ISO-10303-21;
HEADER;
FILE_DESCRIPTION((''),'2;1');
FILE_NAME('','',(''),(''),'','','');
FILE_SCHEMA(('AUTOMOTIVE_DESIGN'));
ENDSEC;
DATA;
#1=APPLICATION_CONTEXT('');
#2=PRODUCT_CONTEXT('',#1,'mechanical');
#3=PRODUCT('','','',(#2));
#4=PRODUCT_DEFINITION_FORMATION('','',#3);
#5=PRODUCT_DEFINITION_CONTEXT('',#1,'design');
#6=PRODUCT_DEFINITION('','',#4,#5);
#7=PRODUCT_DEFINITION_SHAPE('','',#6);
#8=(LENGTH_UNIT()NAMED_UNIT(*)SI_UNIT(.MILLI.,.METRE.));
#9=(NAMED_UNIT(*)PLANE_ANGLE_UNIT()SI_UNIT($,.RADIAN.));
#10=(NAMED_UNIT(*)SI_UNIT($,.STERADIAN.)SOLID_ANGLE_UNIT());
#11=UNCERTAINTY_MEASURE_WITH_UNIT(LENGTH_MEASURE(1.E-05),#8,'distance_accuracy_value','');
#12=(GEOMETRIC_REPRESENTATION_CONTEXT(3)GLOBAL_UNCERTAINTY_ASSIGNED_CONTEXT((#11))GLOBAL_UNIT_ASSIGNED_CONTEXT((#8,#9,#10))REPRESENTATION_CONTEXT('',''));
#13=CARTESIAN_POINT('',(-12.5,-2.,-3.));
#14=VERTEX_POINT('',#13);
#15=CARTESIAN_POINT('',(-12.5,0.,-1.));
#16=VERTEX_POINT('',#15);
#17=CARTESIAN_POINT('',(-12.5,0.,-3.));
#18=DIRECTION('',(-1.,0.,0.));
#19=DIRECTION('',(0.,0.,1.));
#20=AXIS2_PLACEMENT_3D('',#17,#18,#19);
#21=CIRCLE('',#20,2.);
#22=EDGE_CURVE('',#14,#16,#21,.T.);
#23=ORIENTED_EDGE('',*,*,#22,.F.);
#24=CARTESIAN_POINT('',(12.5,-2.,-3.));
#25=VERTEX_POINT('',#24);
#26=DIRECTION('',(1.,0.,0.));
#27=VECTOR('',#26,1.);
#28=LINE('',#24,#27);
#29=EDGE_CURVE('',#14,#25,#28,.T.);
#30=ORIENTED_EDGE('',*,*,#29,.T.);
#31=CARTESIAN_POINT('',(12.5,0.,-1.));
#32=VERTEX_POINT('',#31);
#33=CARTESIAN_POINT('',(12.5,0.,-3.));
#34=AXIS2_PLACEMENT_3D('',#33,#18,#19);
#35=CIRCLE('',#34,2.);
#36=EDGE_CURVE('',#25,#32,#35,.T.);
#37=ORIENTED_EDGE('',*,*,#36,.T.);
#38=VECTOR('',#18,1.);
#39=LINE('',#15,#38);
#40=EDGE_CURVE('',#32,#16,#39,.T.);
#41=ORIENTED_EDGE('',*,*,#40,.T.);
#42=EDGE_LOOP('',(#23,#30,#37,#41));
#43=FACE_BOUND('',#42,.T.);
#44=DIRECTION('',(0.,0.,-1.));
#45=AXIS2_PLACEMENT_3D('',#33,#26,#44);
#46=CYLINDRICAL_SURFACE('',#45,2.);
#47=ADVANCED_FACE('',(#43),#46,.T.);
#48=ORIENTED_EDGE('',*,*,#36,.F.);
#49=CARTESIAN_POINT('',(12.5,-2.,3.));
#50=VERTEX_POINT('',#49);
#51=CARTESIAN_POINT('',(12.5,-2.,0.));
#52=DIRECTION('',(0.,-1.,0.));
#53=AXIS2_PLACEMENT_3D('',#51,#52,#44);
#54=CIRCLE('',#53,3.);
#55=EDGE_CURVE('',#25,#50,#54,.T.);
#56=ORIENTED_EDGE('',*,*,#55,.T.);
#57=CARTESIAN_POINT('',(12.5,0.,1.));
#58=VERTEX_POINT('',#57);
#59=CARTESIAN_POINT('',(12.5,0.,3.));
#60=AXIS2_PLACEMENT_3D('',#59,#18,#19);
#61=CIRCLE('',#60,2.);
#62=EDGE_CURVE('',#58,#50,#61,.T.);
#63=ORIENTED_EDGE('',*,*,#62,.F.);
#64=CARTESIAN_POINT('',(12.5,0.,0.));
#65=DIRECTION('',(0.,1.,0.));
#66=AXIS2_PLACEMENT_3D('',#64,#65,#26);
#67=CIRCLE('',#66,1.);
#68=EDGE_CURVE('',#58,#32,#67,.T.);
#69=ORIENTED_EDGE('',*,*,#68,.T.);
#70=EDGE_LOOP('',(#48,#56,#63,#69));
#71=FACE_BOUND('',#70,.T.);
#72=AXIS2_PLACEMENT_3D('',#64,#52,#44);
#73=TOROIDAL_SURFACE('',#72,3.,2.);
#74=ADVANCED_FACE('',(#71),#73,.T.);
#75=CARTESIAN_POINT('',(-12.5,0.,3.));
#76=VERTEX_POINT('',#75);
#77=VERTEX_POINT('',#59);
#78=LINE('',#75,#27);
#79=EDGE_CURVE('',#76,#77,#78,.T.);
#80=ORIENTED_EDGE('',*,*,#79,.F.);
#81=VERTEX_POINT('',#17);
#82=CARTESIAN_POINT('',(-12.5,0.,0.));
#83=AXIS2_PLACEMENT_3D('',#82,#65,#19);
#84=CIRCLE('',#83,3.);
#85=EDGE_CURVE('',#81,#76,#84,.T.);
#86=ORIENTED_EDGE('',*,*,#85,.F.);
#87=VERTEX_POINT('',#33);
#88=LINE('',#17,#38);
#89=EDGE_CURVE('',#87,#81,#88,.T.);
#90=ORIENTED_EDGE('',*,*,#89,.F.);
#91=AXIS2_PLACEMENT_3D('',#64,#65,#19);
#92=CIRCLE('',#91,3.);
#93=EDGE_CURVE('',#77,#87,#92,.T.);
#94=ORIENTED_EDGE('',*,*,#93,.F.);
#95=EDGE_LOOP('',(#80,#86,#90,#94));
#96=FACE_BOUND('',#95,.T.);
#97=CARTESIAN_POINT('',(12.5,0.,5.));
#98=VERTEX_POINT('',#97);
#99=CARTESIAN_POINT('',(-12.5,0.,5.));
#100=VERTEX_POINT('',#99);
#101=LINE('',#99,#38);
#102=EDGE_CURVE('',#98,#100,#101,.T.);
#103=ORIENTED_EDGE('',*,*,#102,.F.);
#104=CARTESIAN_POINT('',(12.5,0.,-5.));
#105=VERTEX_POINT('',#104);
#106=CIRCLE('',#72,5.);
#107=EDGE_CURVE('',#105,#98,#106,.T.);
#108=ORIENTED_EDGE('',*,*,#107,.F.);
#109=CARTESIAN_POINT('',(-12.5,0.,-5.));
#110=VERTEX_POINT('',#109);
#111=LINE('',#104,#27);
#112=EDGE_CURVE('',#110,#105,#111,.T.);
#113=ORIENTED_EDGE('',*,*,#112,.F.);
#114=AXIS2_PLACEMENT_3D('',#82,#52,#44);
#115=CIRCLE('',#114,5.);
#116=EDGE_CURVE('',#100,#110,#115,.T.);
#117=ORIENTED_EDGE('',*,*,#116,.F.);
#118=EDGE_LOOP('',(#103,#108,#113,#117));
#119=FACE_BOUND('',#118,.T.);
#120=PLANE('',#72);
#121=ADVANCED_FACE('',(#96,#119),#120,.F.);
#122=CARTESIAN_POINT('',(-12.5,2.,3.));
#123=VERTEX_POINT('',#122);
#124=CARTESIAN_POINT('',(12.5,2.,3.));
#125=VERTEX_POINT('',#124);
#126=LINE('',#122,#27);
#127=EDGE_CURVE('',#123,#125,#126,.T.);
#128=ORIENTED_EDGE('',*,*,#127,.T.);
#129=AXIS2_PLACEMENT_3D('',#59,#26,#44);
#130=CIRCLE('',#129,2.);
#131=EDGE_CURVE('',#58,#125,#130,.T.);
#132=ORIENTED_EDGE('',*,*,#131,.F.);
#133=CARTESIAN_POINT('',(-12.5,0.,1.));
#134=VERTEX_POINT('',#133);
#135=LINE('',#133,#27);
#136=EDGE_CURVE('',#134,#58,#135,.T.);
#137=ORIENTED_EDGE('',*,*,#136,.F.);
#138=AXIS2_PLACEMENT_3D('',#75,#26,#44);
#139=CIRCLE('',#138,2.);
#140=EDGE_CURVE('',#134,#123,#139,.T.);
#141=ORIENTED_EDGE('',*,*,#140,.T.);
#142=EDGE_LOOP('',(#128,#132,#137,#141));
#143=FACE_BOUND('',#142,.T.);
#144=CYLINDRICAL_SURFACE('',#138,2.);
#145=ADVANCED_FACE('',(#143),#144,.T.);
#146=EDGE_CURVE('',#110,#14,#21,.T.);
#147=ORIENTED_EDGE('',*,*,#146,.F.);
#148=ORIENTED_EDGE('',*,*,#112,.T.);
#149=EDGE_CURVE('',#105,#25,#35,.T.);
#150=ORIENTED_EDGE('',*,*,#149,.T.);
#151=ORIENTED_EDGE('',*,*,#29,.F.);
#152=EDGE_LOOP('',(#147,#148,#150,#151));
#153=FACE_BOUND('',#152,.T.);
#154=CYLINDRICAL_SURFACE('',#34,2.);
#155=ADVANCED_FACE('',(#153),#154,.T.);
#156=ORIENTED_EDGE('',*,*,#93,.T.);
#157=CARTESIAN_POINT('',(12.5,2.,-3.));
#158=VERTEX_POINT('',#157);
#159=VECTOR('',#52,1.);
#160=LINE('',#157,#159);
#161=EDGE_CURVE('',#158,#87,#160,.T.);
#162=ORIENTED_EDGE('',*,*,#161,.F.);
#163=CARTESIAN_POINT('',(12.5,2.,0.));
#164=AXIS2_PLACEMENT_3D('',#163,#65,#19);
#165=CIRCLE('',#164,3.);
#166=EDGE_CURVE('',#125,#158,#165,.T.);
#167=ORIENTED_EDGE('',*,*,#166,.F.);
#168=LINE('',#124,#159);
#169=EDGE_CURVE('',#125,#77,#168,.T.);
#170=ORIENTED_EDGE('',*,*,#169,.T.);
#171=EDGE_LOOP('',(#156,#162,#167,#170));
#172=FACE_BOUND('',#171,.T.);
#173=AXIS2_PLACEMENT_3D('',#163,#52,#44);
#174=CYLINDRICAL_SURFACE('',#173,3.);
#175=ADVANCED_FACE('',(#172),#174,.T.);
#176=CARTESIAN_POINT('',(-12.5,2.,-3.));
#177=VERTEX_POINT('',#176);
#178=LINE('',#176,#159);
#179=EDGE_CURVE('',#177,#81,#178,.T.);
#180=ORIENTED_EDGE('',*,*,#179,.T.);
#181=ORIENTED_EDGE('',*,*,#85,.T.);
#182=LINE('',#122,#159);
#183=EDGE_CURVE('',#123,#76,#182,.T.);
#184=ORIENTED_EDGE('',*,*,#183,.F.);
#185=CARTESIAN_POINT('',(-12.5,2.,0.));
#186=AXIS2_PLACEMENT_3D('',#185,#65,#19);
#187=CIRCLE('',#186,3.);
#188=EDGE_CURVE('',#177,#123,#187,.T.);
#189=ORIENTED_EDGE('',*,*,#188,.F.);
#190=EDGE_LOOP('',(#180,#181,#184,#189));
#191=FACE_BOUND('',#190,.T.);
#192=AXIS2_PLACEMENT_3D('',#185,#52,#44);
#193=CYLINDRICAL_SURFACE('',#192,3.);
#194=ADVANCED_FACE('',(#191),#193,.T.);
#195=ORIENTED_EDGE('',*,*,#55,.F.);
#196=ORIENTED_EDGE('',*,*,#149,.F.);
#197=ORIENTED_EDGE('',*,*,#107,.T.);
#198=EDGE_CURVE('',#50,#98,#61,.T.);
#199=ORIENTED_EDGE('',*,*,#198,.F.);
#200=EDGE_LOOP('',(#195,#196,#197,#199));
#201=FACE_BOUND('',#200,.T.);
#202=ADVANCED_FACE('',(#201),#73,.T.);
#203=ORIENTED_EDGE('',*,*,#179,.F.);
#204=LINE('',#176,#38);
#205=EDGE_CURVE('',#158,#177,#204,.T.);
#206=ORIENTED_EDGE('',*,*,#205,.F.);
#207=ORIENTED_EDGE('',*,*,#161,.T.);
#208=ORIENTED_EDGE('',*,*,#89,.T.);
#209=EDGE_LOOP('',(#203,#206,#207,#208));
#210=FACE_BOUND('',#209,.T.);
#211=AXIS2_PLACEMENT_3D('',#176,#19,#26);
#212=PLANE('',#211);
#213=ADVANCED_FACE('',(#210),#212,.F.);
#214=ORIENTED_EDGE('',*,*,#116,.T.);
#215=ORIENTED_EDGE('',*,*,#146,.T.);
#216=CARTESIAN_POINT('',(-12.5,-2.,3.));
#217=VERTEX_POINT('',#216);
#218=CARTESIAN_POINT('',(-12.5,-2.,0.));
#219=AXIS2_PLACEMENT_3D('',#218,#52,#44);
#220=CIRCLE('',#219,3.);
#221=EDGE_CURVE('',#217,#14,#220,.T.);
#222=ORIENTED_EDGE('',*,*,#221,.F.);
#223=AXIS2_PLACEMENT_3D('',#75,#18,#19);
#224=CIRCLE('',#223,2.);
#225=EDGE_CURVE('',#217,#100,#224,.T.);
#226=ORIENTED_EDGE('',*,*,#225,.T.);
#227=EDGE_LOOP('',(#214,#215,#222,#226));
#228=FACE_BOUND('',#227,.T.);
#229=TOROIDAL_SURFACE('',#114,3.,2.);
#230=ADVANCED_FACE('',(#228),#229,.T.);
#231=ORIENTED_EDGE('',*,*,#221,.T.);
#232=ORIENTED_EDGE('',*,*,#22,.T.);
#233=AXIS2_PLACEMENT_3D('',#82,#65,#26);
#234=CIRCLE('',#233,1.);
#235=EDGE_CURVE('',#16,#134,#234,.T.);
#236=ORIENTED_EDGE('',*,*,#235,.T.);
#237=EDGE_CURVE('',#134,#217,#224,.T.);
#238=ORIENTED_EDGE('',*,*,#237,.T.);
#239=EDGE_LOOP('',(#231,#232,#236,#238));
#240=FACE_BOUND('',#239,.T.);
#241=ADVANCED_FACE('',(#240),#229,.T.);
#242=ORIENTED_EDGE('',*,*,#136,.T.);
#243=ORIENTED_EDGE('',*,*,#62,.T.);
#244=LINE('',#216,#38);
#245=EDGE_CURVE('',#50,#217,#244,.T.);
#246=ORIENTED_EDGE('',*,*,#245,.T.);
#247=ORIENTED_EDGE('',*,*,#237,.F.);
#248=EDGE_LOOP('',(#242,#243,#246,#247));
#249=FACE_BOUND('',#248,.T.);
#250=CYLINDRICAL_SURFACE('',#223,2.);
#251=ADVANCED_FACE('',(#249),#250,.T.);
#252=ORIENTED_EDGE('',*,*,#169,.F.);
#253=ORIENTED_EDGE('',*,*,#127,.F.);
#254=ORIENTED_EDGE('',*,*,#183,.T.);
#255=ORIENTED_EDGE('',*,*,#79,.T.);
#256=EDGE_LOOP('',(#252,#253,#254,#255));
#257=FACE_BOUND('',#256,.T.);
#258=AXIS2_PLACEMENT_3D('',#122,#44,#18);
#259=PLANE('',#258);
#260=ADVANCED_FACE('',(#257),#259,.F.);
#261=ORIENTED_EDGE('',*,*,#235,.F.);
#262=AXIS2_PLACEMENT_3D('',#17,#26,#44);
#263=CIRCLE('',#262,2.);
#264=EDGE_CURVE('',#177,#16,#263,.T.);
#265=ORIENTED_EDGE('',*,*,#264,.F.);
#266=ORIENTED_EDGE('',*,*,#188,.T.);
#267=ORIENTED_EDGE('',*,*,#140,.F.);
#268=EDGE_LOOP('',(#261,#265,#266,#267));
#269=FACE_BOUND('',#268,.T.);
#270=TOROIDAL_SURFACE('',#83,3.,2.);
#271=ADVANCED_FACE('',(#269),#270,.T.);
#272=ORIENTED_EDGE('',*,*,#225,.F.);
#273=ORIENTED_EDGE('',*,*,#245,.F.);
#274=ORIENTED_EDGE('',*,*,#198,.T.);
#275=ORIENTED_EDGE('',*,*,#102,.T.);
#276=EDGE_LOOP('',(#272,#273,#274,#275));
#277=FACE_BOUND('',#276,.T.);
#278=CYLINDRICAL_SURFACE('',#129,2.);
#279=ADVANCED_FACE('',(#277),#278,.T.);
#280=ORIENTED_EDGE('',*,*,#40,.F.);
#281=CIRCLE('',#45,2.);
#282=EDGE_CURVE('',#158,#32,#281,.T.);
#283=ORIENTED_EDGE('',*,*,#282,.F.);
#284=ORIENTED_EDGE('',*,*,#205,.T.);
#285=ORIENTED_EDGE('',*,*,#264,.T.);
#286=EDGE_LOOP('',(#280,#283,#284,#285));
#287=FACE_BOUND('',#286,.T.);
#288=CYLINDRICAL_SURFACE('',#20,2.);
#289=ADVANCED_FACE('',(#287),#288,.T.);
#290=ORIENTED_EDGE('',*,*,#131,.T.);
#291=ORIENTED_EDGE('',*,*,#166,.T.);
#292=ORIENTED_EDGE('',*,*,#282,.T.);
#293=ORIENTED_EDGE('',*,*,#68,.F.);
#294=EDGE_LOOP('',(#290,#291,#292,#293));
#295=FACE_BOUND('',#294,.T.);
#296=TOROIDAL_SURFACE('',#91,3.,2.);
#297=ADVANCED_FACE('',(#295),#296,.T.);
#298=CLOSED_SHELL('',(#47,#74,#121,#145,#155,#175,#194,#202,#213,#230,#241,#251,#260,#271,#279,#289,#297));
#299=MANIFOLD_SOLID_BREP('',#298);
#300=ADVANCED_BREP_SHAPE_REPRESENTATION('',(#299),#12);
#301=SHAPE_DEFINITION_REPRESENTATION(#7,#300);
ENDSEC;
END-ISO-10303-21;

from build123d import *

# Parameters (mm, degrees)
EXTRUDE_THIN1_DEPTH = 2
FILLET1_R           = 2
BOSS_EXTRUDE1_START = 2
BOSS_EXTRUDE1_DEPTH = 2
FILLET2_R           = 2


with BuildPart() as part:
    # Sketch1 → Extrude-Thin1 (new body)
    with BuildSketch(Plane(origin=(0, 0, 0), x_dir=(1, 0, 0), z_dir=(0, 1, 0))):
        with BuildLine():
            Line((12.5, -3), (-12.5, -3))
            ThreePointArc((-12.5, -3), (-15.5, 0), (-12.5, 3))
            Line((-12.5, 3), (12.5, 3))
            ThreePointArc((12.5, 3), (15.5, 0), (12.5, -3))
        make_face()
        with BuildLine():
            Line((12.5, -1), (-12.5, -1))
            ThreePointArc((-12.5, -1), (-13.5, 0), (-12.5, 1))
            Line((-12.5, 1), (12.5, 1))
            ThreePointArc((12.5, 1), (13.5, 0), (12.5, -1))
        make_face(mode=Mode.SUBTRACT)
    extrude(amount=EXTRUDE_THIN1_DEPTH)

    # Fillet1
    fillet1_edges = [part.edges().sort_by_distance(p)[0] for p in [
        (13.5, 2, 0),
        (0, 2, 1),
        (-13.5, 2, 0),
        (0, 2, -1),
    ]]
    fillet(fillet1_edges, radius=FILLET1_R - 0.0001)  # a hair under: the kernel refuses the full size

    # Sketch2 → Boss-Extrude1 (add)
    with BuildSketch(Plane.XZ.offset(BOSS_EXTRUDE1_START)):
        with BuildLine():
            Line((12.5, -5), (-12.5, -5))
            ThreePointArc((-12.5, -5), (-17.5, 0), (-12.5, 5))
            Line((-12.5, 5), (12.5, 5))
            ThreePointArc((12.5, 5), (17.5, 0), (12.5, -5))
        make_face()
        with BuildLine():
            Line((12.5, -1), (-12.5, -1))
            ThreePointArc((-12.5, -1), (-13.5, 0), (-12.5, 1))
            Line((-12.5, 1), (12.5, 1))
            ThreePointArc((12.5, 1), (13.5, 0), (12.5, -1))
        make_face(mode=Mode.SUBTRACT)
    extrude(amount=-BOSS_EXTRUDE1_DEPTH)

    # Fillet2
    fillet2_edges = [part.edges().sort_by_distance(p)[0] for p in [
        (-13.5, -2, 0),
        (0, -2, -1),
        (13.5, -2, 0),
        (0, -2, 1),
        (0, -2, -5),
        (-17.5, -2, 0),
        (0, -2, 5),
        (17.5, -2, 0),
    ]]
    fillet(fillet2_edges, radius=FILLET2_R - 0.0001)  # a hair under: the kernel refuses the full size


solid = part.part
